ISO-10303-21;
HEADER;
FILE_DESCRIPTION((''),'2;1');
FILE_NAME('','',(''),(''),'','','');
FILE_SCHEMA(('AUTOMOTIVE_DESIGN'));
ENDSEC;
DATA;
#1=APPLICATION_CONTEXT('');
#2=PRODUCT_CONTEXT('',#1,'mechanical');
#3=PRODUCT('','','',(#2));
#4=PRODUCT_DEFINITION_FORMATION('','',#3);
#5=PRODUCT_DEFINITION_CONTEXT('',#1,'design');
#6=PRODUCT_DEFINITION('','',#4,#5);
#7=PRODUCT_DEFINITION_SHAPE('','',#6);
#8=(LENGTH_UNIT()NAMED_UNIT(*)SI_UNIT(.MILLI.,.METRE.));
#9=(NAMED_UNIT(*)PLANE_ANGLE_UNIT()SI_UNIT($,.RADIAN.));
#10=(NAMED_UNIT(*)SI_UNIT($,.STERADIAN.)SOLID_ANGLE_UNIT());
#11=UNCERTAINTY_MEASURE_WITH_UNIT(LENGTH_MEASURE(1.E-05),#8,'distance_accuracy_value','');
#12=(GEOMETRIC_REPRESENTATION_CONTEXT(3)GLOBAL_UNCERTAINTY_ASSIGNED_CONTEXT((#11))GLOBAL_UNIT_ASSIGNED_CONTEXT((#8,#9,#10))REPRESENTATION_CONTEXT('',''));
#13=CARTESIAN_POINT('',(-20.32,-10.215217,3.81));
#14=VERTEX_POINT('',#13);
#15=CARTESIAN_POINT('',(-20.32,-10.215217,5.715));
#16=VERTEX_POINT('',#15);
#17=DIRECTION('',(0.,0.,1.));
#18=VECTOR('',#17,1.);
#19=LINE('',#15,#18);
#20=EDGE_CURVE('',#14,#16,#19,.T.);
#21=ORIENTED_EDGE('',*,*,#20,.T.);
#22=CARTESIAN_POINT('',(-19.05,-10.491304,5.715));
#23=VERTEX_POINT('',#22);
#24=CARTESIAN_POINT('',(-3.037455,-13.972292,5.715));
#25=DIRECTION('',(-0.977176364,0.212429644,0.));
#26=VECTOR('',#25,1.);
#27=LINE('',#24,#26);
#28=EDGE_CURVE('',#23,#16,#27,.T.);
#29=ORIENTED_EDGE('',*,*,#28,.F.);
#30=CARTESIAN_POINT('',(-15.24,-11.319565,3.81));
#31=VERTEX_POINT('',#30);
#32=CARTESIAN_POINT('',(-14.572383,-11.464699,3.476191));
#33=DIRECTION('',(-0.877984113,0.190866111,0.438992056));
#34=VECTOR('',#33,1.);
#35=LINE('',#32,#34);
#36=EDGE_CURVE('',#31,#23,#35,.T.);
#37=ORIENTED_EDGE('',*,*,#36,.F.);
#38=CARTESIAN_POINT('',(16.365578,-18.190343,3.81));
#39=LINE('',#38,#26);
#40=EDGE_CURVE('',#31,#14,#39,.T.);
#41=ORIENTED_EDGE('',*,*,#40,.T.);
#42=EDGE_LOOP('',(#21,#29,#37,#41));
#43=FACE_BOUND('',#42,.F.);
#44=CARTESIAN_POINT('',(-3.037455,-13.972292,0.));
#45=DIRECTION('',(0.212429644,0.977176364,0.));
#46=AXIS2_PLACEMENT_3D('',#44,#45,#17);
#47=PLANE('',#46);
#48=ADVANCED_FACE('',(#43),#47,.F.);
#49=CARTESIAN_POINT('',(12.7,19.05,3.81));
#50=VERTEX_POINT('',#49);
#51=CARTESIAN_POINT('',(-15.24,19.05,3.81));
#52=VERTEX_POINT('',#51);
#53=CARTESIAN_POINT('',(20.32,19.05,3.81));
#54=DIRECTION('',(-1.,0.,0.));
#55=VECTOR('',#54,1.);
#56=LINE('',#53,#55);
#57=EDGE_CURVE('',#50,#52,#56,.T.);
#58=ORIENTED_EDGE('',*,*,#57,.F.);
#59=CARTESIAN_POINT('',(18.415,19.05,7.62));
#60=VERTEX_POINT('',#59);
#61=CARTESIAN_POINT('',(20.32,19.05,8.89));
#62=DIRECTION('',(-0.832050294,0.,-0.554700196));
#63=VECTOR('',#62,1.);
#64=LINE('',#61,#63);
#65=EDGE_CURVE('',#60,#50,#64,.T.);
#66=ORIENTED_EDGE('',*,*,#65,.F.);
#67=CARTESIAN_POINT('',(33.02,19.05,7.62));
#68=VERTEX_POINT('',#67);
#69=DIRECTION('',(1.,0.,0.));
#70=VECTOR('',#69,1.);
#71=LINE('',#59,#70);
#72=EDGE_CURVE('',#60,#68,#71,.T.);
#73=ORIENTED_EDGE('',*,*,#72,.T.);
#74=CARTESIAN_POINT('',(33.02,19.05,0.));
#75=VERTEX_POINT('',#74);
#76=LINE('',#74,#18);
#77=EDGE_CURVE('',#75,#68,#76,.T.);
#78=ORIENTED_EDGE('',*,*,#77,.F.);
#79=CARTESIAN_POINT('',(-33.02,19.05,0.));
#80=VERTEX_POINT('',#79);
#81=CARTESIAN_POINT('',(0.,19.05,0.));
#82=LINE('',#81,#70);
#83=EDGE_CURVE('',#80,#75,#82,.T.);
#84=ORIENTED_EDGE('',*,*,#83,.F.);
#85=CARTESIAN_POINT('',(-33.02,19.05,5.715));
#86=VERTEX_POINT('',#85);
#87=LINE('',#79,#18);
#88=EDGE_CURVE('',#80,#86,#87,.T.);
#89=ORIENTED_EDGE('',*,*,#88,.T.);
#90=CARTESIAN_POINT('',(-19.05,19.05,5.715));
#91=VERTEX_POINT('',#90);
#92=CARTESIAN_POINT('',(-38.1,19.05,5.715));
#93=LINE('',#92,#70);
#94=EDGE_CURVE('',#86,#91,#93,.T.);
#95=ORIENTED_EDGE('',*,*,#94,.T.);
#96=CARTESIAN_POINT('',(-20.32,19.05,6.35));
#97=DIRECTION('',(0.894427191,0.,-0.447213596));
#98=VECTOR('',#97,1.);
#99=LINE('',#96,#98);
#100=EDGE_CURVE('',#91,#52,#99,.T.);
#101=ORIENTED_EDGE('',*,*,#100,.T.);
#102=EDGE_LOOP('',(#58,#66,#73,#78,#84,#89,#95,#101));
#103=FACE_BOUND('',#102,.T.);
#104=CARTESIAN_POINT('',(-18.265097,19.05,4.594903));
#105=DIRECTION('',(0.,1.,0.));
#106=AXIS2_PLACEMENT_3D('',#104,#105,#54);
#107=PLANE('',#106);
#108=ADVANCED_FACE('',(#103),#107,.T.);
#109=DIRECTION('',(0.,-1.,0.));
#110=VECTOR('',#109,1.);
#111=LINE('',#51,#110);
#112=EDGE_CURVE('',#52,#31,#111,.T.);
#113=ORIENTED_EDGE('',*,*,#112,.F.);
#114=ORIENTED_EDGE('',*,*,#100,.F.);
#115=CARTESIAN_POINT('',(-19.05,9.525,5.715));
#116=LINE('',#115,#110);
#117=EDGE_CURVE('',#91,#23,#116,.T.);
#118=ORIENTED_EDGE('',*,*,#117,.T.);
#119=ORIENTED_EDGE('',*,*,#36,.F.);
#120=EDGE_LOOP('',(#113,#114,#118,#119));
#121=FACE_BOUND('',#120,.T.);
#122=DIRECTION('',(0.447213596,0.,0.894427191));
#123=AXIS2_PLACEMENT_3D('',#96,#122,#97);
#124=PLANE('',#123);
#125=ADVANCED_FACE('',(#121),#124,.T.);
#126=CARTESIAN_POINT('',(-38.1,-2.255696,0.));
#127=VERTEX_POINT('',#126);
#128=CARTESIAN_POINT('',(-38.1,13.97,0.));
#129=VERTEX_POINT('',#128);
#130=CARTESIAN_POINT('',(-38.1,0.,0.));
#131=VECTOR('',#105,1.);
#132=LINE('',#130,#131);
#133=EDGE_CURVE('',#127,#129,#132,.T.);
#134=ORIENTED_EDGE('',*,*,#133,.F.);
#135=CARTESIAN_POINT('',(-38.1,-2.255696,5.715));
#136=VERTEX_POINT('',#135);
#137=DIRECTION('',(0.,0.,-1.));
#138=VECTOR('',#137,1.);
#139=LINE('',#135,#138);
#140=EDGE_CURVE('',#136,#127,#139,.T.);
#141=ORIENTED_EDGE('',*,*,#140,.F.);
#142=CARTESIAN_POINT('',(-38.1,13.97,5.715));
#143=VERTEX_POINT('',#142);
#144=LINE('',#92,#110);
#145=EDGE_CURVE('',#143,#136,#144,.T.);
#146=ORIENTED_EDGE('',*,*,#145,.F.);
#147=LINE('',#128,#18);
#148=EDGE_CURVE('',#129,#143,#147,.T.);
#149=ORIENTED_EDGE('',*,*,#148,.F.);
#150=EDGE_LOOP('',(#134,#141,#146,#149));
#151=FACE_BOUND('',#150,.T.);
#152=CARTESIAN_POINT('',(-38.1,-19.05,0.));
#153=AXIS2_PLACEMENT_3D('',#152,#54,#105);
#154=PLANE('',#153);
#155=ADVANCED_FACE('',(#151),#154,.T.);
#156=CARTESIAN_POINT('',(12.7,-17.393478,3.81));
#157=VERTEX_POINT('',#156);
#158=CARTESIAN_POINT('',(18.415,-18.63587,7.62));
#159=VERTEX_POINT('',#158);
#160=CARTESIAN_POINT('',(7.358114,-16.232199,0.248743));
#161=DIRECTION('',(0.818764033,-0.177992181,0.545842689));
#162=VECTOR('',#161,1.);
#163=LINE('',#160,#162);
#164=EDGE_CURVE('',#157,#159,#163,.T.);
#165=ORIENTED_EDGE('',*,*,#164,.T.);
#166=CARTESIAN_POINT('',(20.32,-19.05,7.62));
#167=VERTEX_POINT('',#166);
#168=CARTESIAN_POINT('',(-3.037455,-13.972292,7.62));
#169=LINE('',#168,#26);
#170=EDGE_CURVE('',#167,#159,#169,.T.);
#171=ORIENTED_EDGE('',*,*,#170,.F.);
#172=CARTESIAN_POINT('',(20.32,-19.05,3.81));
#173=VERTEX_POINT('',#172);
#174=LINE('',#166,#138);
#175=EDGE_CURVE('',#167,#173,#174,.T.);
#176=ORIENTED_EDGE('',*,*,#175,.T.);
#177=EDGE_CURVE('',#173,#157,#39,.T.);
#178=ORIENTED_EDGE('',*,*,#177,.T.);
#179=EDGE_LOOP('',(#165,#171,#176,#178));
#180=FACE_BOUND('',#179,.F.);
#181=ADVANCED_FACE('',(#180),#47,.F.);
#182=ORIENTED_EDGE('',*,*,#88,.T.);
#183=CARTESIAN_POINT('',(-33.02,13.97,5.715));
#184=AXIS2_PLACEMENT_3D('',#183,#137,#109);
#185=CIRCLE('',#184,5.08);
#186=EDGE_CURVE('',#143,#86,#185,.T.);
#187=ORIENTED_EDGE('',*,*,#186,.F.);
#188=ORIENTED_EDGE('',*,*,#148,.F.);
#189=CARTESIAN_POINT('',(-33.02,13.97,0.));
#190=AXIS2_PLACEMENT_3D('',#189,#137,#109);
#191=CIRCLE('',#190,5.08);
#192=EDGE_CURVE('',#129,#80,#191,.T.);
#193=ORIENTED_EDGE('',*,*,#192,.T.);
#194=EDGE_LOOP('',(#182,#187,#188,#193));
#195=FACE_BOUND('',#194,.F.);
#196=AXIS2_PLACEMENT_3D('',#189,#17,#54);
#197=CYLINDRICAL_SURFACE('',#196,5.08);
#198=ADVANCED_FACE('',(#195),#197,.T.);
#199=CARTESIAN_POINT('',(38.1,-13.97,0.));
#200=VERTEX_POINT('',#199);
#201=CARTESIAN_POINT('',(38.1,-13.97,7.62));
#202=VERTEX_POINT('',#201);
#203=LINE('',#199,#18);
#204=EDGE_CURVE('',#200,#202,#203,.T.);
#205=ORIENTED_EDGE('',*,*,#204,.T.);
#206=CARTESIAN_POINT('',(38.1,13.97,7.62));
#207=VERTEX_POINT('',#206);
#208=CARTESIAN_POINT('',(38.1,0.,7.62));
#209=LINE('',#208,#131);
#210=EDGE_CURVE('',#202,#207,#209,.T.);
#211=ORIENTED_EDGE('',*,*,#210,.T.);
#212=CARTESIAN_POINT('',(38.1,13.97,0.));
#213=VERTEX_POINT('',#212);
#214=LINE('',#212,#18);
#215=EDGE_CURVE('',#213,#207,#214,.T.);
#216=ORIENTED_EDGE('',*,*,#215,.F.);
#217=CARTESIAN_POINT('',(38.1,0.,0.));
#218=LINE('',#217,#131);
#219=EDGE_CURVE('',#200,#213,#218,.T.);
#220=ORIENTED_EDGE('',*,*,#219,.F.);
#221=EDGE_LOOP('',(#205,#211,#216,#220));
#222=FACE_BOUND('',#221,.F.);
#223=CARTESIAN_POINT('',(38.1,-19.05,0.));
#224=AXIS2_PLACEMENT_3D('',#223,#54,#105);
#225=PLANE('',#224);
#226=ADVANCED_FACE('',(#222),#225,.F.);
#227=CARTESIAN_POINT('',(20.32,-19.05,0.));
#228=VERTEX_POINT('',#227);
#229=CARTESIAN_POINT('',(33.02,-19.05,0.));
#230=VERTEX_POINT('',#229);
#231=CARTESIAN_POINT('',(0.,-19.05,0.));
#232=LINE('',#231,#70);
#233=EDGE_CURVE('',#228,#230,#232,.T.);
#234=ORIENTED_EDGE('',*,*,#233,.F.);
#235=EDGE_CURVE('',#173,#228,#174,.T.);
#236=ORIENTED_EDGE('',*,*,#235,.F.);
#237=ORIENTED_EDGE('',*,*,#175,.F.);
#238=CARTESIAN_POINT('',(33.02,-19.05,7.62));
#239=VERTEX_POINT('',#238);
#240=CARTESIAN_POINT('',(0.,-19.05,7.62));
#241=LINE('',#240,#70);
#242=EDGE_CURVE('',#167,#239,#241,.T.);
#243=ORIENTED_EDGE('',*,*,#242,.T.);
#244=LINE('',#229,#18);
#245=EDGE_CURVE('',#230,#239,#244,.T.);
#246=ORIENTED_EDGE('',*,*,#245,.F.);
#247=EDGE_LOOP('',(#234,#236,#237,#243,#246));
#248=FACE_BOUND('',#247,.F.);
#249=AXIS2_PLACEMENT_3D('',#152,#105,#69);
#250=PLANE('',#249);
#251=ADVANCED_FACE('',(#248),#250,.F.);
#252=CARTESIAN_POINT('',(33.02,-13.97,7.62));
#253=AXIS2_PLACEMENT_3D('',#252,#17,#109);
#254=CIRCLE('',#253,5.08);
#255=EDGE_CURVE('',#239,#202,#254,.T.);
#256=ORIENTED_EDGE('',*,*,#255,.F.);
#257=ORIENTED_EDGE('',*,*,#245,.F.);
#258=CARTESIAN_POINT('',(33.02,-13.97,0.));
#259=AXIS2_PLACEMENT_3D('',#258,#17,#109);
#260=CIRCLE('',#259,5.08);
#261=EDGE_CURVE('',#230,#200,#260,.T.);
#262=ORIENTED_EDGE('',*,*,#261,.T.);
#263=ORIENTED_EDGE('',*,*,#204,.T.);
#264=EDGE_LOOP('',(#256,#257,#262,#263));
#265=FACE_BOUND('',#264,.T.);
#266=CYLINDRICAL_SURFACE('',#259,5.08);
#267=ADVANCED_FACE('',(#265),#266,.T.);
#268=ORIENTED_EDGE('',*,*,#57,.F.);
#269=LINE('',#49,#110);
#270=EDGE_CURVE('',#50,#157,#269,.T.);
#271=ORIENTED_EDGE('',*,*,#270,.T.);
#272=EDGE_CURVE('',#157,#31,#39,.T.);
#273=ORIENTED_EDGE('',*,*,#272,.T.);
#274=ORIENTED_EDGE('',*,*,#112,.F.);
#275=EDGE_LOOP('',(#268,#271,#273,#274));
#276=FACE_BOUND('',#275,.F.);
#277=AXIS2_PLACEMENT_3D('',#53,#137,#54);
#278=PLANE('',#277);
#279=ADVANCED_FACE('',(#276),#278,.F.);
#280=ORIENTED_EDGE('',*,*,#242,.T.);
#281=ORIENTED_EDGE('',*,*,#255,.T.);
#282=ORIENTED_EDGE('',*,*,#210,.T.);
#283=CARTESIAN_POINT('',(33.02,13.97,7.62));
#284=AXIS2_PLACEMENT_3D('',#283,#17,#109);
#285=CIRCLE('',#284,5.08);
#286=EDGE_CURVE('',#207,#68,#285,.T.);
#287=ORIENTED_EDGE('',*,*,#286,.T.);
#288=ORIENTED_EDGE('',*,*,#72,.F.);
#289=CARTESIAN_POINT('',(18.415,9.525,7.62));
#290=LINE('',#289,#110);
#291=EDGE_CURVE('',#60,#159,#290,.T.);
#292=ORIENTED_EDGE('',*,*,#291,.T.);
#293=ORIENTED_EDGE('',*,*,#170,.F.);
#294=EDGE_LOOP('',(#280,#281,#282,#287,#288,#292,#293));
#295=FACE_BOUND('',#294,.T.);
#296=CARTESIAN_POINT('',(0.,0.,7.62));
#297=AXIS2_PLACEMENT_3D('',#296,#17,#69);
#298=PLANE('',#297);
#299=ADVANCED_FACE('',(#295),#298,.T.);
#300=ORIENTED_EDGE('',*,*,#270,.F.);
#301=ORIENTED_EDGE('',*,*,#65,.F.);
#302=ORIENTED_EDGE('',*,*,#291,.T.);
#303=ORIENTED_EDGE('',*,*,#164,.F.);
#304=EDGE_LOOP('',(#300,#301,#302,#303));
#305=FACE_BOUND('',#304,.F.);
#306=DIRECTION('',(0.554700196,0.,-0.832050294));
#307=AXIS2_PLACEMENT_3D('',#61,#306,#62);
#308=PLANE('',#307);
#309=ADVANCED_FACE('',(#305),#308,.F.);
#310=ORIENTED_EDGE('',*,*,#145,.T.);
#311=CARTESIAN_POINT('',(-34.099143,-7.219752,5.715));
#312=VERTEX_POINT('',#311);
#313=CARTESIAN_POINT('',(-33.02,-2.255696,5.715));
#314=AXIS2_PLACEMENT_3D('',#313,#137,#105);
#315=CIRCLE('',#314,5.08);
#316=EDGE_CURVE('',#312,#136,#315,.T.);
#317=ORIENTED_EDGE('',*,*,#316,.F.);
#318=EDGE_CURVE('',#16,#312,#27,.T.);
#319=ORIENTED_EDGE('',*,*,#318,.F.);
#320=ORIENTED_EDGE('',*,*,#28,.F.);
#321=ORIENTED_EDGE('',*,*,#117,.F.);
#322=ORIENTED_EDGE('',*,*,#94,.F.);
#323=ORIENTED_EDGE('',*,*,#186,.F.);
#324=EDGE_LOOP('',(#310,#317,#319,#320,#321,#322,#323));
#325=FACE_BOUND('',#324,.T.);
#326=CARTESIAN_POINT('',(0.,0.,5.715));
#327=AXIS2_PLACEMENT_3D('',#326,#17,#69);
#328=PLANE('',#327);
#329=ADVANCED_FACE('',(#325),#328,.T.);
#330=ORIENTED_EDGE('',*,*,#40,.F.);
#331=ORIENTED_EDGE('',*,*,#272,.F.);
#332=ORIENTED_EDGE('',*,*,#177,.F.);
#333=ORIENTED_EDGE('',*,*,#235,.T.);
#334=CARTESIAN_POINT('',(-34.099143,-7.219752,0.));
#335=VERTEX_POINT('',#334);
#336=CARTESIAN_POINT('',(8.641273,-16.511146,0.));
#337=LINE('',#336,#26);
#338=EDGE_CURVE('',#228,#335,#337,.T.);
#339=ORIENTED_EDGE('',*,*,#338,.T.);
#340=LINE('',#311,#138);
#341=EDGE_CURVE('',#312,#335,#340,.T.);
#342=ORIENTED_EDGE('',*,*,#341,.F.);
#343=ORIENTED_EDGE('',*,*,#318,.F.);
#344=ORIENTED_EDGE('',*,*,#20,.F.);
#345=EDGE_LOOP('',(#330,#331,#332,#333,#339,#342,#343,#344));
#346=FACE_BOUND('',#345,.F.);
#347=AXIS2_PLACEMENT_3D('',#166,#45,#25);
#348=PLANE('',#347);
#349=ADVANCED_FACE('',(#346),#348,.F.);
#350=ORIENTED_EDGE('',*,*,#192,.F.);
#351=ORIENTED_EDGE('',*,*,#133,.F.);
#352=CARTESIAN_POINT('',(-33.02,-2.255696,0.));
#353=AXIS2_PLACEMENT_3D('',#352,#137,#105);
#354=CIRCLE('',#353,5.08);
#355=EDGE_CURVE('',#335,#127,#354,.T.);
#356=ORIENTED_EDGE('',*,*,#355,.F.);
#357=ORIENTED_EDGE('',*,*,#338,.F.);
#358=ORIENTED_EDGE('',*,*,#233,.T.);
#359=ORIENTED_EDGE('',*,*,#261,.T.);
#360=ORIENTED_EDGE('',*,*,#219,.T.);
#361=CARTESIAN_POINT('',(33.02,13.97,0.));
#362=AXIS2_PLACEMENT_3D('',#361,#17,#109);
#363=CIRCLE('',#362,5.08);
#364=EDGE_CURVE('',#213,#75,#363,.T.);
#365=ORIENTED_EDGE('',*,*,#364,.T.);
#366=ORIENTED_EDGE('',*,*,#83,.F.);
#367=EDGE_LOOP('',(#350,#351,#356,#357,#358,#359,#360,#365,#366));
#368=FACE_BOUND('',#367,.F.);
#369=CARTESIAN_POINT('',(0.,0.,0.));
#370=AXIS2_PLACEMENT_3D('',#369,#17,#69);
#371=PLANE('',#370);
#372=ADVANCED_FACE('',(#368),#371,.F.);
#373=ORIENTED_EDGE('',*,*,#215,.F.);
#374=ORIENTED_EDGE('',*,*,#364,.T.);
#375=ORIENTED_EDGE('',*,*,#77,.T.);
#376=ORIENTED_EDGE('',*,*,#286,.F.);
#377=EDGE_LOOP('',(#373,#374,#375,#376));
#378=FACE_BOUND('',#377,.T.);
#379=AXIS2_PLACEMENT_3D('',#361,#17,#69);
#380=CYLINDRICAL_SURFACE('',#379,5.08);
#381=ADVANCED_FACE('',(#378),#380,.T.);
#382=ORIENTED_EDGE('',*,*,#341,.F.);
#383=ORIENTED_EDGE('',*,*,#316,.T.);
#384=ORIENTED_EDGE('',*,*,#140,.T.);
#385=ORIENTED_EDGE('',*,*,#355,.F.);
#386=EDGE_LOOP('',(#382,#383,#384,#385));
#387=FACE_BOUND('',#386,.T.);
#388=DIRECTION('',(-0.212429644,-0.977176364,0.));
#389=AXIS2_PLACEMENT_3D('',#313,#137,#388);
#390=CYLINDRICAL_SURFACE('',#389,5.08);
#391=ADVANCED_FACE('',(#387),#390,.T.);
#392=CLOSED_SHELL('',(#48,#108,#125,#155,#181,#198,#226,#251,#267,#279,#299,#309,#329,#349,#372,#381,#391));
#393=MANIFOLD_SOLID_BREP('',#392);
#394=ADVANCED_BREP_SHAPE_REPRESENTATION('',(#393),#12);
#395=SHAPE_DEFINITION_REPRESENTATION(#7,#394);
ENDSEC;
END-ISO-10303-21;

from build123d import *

# Parameters (mm, degrees)
F0_W        = 76.2
F0_H        = 38.1
F1_DEPTH    = 7.62
F4_DEPTH    = 7.621
F6_DEPTH    = 38.101
F7_T4_DEPTH = 38.1
F8_T4_DEPTH = 42.4215480701
F9_R        = 5.08


# Not quite as in the source:
# - a fillet or chamfer that OpenCascade refuses, or shapes differently, is made with other operations: its cross-section is extruded or revolved along the edge and cut away or added
# - a feature names something its author has since deleted; it is built from what else it names


with BuildPart() as f1:
    # F0 (on Top) → F1 (new body)
    with BuildSketch(Plane.XY):
        Rectangle(F0_W, F0_H)
    extrude(amount=F1_DEPTH)

    # F3 (on face) → F4 (cut, through all)
    with BuildSketch(Plane.XY.offset(7.62)):
        Polygon((-38.1, -6.35), (-38.1, -19.05), (-20.32, -19.05), (20.32, -19.05), align=None)
    extrude(amount=-F4_DEPTH, mode=Mode.SUBTRACT)

    # F5 (on face) → F6 (cut, through all)
    with BuildSketch(Plane(origin=(0, 19.05, 0), x_dir=(-1, 0, 0), z_dir=(0, 1, 0))):
        Polygon((38.1, 7.62), (-20.32, 7.62), (-20.32, 3.81), (20.32, 3.81), (20.32, 5.715), (38.1, 5.715), align=None)
    extrude(amount=-F6_DEPTH, mode=Mode.SUBTRACT)

    # F7: chamfer of 7.62 x 5.08 on 1 edges, made by hand


with BuildPart() as f7_tool2:
    # F7_s3 → F7_t4 (new body)
    with BuildSketch(Plane.XZ.offset(-19.05)):
        Polygon((20.32, 8.89), (12.7, 3.81), (20.32, 3.81), align=None)
    extrude(amount=F7_T4_DEPTH)

    split(bisect_by=Plane.XY.offset(7.62), keep=Keep.BOTTOM)

    split(bisect_by=Plane(origin=(-3.0374548736, -13.9722924188, 0), x_dir=(0, 0, 1), z_dir=(0.2124296443, 0.9771763639, 0)), keep=Keep.TOP)


with BuildPart() as f1_1:
    add(f1.part)

    # F7_t1: union F7_tool2
    add(f7_tool2.part)

    # F8: chamfer of 2.54 x 5.08 on 1 edges, made by hand


with BuildPart() as f8_tool2:
    # F8_s3 → F8_t4 (new body)
    with BuildSketch(Plane.XZ.offset(-19.05)):
        Polygon((-20.32, 6.35), (-15.24, 3.81), (-20.32, 3.81), align=None)
    extrude(amount=F8_T4_DEPTH)

    split(bisect_by=Plane.XY.offset(5.715), keep=Keep.BOTTOM)

    split(bisect_by=Plane(origin=(-3.0374548736, -13.9722924188, 0), x_dir=(0, 0, 1), z_dir=(0.2124296443, 0.9771763639, 0)), keep=Keep.TOP)


with BuildPart() as f1_2:
    add(f1_1.part)

    # F8_t1: union F8_tool2
    add(f8_tool2.part)

    # F9
    f9_edges = [f1_2.edges().sort_by_distance(p)[0] for p in [
        (-38.1, -6.35, 2.8575),
        (-38.1, 19.05, 2.8575),
        (38.1, -19.05, 3.81),
        (38.1, 19.05, 3.81),
    ]]
    fillet(f9_edges, radius=F9_R)


solid = f1_2.part
